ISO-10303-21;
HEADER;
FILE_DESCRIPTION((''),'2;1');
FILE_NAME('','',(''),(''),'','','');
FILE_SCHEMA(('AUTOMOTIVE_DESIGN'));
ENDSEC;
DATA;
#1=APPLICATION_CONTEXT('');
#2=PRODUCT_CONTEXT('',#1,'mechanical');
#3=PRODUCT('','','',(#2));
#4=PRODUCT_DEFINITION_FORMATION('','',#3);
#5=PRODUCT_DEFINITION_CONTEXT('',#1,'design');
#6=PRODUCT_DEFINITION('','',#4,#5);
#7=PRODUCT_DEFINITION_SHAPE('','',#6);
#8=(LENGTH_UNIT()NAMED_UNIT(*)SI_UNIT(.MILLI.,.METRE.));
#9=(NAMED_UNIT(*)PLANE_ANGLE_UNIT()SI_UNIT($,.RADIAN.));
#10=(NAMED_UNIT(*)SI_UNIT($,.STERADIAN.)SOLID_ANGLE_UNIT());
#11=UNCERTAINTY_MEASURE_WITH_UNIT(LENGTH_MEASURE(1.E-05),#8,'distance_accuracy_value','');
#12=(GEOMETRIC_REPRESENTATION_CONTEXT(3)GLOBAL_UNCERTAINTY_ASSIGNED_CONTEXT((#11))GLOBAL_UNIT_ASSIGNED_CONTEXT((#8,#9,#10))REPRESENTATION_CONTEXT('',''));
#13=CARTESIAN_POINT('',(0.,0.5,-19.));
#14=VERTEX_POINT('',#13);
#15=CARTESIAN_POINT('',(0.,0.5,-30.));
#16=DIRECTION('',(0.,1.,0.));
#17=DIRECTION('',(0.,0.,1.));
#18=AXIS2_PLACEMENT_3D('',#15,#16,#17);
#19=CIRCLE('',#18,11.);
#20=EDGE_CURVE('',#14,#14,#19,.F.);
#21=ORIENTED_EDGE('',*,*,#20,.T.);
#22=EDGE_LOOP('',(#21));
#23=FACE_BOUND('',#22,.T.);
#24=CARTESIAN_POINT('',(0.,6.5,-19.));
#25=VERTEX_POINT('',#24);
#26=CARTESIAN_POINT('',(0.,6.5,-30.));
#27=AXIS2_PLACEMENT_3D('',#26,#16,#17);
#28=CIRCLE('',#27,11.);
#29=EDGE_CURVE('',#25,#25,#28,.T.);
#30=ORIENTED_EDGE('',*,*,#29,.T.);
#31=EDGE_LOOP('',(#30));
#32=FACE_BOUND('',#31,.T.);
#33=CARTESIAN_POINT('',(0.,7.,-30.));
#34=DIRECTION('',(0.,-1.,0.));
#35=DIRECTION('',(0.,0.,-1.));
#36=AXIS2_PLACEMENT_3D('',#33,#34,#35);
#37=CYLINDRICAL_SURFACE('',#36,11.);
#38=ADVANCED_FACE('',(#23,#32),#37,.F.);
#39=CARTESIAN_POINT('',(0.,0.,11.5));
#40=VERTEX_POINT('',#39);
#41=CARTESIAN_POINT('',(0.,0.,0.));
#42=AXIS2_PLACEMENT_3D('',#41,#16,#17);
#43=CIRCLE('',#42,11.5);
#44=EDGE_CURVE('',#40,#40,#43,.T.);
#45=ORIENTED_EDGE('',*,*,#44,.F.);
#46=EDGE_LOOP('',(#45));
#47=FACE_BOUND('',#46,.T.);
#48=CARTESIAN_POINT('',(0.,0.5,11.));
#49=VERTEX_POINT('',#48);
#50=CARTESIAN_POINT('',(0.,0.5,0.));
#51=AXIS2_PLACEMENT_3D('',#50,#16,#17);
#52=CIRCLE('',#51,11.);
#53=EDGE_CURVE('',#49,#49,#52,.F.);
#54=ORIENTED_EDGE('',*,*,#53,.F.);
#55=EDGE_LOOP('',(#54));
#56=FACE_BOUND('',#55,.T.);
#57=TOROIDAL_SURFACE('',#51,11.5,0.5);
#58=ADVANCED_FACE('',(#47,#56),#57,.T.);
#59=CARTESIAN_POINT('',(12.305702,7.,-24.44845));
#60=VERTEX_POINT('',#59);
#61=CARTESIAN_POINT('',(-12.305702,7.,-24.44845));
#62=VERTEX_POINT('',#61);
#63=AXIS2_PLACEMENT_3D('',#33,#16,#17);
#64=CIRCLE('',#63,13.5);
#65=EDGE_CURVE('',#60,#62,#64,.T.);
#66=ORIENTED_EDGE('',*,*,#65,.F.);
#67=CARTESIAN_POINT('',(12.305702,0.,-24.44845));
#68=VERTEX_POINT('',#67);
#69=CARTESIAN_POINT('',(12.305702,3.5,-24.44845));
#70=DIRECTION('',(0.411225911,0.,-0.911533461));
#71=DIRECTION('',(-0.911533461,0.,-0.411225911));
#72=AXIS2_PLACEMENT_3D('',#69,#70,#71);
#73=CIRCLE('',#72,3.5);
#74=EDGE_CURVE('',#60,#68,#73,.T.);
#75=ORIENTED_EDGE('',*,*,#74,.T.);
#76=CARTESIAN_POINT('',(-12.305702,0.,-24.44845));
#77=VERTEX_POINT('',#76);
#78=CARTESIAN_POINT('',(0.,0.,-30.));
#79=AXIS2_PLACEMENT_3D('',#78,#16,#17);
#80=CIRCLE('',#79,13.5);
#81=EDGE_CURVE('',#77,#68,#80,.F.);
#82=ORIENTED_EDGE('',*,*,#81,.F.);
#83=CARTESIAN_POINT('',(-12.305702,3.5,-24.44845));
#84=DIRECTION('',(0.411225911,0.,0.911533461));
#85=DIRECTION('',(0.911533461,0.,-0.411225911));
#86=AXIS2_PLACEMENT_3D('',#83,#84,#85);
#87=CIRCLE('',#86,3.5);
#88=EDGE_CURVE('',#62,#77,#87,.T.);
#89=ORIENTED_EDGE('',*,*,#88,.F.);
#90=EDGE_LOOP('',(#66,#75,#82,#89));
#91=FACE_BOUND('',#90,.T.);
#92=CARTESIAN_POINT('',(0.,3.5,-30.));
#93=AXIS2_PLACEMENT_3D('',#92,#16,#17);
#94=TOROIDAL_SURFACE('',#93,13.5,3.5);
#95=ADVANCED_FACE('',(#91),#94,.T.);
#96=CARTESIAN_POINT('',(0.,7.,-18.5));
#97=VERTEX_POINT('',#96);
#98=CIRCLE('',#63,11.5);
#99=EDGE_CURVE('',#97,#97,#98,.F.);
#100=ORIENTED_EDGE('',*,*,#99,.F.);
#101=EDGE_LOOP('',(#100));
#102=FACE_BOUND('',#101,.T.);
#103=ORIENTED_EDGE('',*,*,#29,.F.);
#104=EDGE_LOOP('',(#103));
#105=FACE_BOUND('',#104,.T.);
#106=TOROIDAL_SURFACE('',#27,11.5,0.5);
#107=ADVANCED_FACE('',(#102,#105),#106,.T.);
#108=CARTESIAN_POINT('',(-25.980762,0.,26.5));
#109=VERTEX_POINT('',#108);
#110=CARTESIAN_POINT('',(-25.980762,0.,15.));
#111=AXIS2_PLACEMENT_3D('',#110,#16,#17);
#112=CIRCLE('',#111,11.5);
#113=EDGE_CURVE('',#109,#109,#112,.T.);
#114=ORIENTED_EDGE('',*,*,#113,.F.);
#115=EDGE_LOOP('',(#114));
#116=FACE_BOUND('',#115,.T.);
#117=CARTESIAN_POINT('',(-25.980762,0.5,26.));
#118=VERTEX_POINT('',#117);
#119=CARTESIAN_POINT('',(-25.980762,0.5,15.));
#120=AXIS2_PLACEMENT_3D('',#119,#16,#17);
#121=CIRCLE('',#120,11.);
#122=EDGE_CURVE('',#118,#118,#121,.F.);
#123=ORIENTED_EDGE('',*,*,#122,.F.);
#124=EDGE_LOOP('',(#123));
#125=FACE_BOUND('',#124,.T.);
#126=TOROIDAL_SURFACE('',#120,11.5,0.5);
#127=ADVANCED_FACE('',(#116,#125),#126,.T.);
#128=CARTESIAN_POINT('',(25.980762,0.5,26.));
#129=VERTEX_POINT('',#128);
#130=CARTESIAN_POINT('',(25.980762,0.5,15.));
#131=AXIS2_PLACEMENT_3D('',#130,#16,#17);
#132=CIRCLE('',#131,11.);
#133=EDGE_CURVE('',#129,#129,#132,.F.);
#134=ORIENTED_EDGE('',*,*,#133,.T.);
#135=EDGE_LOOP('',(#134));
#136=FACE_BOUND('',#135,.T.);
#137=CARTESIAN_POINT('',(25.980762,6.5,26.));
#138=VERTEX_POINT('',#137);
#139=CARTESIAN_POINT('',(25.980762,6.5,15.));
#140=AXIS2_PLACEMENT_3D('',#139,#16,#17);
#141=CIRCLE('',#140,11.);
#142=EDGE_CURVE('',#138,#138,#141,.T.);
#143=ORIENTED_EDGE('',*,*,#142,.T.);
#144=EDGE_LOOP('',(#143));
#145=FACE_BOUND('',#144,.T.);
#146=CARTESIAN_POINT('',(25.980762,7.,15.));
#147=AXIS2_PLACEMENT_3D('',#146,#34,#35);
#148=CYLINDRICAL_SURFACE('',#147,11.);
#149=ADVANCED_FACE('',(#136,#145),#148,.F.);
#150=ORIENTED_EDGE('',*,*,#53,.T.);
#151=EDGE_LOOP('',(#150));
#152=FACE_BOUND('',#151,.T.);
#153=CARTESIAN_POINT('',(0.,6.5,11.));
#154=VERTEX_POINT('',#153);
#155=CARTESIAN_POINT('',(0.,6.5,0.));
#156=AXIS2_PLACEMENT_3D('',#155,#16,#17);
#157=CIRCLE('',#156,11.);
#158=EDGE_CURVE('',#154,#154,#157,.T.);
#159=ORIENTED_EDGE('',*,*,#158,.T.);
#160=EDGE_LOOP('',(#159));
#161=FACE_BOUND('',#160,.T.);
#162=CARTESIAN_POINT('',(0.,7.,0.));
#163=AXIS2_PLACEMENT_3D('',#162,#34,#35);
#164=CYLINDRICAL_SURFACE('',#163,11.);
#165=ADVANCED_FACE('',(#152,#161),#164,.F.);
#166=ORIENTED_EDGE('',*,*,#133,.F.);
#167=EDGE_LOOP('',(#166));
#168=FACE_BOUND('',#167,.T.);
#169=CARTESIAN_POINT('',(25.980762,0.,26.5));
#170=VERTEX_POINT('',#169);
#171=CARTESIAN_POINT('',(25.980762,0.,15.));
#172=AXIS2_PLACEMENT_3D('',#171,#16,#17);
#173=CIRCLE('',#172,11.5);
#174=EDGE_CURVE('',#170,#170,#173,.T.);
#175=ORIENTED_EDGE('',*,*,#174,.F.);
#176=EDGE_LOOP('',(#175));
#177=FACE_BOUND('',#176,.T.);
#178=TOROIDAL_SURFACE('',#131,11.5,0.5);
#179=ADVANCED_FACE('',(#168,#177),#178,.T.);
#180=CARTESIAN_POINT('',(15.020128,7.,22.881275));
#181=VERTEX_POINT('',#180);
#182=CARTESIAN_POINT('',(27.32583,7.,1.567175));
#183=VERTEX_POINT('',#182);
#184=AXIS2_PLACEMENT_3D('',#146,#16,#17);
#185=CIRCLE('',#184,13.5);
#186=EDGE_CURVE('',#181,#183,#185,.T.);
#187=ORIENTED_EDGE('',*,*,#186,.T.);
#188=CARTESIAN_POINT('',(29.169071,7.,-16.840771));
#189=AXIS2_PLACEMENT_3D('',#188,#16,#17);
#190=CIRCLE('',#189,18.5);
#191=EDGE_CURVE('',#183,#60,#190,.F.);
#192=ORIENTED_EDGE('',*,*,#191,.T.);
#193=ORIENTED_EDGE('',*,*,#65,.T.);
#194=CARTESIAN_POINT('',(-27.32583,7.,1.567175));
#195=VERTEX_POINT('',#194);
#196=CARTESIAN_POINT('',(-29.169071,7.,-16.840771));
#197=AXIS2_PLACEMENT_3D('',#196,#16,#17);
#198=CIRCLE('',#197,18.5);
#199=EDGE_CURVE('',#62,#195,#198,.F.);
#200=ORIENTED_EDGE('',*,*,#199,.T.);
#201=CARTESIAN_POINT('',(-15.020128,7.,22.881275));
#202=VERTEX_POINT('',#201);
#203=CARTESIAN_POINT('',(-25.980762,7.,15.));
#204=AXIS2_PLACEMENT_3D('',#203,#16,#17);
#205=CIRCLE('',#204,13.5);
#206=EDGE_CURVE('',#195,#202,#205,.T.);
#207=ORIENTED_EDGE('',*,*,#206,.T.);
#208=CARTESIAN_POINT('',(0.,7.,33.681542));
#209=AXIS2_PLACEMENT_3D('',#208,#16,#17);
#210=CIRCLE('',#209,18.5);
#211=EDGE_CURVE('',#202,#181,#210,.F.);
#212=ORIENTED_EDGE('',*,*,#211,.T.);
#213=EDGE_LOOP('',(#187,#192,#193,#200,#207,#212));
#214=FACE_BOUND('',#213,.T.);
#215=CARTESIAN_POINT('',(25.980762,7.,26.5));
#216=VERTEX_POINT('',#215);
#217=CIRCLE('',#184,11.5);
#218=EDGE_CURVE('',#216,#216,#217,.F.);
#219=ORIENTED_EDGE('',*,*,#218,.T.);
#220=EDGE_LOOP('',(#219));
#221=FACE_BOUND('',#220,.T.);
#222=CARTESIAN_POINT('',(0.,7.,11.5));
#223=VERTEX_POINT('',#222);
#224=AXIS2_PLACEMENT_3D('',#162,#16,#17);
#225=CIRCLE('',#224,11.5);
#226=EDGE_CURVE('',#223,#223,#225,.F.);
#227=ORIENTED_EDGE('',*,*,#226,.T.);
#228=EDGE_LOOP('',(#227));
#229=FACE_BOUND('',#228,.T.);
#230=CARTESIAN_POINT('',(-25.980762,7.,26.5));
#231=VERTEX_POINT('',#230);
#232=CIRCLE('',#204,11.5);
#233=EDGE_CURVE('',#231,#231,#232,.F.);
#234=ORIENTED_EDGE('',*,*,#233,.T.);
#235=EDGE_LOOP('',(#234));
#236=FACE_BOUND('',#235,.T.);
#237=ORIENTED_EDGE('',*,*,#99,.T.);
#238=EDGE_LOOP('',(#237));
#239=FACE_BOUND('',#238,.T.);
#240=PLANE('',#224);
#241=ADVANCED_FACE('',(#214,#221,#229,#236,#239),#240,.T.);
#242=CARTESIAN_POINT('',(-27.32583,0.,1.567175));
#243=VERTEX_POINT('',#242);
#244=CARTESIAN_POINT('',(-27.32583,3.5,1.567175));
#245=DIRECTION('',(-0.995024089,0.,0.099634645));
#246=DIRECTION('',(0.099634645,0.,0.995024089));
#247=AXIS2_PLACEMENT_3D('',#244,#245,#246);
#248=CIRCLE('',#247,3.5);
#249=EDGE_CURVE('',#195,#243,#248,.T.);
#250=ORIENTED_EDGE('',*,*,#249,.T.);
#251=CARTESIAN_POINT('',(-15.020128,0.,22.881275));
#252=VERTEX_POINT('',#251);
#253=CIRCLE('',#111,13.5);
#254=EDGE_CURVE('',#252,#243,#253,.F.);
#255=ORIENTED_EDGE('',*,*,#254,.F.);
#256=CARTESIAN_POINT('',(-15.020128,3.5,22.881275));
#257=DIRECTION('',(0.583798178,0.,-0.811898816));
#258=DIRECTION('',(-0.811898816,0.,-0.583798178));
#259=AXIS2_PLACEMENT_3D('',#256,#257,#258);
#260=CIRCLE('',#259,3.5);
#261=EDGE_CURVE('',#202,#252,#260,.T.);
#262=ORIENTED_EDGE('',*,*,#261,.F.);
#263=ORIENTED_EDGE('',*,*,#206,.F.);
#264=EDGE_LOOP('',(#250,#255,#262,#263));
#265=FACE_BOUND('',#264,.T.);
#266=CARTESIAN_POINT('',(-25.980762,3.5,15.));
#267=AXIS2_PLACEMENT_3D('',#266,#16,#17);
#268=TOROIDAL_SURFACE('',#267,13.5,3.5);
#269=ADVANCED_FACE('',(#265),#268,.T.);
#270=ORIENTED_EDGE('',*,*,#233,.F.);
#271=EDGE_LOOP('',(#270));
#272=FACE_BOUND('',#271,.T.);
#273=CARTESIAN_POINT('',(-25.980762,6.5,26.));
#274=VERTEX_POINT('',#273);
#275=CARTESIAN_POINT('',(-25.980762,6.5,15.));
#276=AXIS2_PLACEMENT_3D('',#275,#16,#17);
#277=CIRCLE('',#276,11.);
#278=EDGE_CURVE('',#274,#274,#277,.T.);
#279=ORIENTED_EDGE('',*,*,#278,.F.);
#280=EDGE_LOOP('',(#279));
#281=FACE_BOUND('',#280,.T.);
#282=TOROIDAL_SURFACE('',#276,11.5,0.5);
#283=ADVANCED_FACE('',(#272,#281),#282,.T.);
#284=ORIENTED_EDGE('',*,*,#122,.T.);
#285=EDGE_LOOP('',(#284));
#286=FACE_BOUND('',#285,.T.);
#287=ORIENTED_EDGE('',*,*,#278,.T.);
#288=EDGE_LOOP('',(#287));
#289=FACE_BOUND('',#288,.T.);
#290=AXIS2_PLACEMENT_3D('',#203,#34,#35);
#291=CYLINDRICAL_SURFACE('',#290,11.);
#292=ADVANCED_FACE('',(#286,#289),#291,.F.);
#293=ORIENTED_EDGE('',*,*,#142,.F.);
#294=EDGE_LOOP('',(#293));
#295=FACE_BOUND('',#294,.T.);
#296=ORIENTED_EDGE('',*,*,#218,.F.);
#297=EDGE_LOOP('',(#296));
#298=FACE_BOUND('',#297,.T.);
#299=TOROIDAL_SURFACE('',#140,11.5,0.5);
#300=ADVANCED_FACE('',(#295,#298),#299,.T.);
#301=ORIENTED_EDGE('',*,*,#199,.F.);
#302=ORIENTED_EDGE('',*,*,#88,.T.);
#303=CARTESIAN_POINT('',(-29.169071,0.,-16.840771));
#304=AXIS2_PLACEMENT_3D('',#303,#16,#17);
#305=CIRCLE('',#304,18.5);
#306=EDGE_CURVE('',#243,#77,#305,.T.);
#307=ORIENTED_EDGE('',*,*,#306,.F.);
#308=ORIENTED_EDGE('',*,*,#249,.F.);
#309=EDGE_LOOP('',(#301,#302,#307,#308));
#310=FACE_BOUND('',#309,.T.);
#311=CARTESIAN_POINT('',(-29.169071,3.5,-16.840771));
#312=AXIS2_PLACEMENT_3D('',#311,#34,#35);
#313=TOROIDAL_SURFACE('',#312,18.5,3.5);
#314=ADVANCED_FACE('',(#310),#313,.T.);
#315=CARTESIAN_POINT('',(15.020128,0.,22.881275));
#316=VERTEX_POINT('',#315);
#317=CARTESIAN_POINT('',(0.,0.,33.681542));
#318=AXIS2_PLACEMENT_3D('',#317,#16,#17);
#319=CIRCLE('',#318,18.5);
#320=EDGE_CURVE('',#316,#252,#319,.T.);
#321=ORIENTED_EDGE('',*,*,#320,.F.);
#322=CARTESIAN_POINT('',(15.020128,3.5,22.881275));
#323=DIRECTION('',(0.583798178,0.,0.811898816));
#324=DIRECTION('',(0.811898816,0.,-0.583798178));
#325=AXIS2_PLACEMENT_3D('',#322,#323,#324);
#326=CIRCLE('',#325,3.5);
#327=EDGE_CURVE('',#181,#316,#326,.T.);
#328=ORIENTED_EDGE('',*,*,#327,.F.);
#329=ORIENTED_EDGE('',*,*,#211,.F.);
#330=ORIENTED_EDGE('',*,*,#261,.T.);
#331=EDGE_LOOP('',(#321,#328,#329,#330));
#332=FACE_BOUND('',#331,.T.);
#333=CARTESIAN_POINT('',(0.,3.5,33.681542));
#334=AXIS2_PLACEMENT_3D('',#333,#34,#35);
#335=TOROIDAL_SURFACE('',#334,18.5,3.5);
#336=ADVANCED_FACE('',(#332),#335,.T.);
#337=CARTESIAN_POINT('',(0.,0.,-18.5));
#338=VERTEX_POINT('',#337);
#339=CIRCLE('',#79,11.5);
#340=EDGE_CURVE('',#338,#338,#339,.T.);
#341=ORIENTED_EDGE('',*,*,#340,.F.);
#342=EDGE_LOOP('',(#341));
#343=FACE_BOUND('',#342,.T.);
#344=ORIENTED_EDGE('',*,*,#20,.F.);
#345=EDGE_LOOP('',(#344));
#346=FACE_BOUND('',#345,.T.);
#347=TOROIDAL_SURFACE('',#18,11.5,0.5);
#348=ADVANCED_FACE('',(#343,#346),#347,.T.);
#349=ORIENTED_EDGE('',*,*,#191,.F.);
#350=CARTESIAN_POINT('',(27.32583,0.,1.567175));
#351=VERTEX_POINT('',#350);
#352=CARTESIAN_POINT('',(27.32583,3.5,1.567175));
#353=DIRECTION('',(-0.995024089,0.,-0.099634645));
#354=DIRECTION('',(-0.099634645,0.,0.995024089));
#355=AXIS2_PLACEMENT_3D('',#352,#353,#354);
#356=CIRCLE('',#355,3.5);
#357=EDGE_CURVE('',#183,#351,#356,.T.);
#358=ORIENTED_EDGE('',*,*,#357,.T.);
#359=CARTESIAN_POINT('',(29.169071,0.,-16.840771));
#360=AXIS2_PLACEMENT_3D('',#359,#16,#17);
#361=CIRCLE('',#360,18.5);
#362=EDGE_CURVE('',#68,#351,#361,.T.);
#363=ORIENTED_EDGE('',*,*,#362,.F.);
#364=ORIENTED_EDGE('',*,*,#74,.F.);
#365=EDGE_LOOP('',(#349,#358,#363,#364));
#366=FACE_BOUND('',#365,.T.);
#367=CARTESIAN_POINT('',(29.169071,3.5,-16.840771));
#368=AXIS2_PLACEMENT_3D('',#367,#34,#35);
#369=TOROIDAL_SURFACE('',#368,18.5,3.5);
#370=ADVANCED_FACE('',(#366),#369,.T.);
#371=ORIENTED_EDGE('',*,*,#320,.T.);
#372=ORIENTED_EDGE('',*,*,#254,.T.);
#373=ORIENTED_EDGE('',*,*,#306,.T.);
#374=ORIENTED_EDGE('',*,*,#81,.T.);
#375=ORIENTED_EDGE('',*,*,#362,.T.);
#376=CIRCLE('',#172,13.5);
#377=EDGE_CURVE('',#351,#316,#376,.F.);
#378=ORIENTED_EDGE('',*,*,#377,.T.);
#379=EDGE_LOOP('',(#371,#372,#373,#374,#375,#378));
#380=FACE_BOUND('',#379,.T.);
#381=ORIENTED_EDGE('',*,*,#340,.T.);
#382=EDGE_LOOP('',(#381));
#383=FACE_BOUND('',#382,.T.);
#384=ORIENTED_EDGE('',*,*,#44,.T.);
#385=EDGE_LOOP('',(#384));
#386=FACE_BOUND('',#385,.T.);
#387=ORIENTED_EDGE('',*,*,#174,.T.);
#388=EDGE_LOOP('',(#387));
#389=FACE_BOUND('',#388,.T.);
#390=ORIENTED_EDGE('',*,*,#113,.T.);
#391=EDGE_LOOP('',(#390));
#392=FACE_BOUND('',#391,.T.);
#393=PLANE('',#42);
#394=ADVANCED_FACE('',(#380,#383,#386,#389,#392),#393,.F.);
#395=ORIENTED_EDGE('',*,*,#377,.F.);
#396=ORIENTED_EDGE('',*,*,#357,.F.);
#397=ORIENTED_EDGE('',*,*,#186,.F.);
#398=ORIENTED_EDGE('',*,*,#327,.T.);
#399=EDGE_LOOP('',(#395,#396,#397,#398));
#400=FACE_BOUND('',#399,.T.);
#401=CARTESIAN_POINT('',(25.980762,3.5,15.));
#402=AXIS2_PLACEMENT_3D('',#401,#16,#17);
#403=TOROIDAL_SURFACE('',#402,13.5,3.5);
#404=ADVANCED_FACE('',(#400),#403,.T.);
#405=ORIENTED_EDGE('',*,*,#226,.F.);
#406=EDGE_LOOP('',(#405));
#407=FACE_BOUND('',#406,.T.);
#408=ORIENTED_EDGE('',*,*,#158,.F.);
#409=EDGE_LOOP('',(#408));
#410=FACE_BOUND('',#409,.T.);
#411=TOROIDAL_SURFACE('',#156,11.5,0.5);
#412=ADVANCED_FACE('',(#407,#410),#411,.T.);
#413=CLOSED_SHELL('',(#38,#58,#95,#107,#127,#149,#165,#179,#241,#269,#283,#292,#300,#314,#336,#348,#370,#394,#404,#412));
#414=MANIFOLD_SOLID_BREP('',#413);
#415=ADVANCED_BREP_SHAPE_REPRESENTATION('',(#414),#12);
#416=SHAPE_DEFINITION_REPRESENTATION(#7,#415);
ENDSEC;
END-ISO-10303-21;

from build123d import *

# Parameters (mm, degrees)
SKETCH1_R           = 11
BOSS_EXTRUDE1_DEPTH = 7
FILLET1_R           = 3.5
FILLET2_R           = 0.5


with BuildPart() as part:
    # Sketch1 → Boss-Extrude1 (new body)
    with BuildSketch(Plane(origin=(0, 0, 0), x_dir=(1, 0, 0), z_dir=(0, 1, 0))):
        with BuildLine():
            ThreePointArc((15.496068833, 23.009159512), (0, 47), (-15.496068833, 23.009159512))
            ThreePointArc((-15.496068833, 23.009159512), (-16.178689687, 9.340770846), (-27.674551074, 1.915409512))
            ThreePointArc((-27.674551074, 1.915409512), (-40.703193978, -23.5), (-12.178482241, -24.924569024))
            ThreePointArc((-12.178482241, -24.924569024), (0, -18.681541692), (12.178482241, -24.924569024))
            ThreePointArc((12.178482241, -24.924569024), (40.703193978, -23.5), (27.674551074, 1.915409512))
            ThreePointArc((27.674551074, 1.915409512), (16.178689687, 9.340770846), (15.496068833, 23.009159512))
        make_face()
        with Locations(Location((0, 30, 0), (0, 0, 270))):
            Circle(SKETCH1_R, mode=Mode.SUBTRACT)
        with Locations(Location((0, 0, 0), (0, 0, 270))):
            Circle(SKETCH1_R, mode=Mode.SUBTRACT)
        with Locations(Location((-25.980762114, -15, 0), (0, 0, 270))):
            Circle(SKETCH1_R, mode=Mode.SUBTRACT)
        with Locations(Location((25.980762114, -15, 0), (0, 0, 270))):
            Circle(SKETCH1_R, mode=Mode.SUBTRACT)
    extrude(amount=BOSS_EXTRUDE1_DEPTH)

    # Fillet1
    fillet1_edges = [part.edges().sort_by_distance(p)[0] for p in [
        (-16.178689687, 7, -9.340770846),
        (16.178689687, 0, -9.340770846),
        (40.703193978, 0, 23.5),
        (0, 0, 18.681541692),
        (-40.703193978, 0, 23.5),
        (0, 0, -47),
    ]]
    fillet(fillet1_edges, radius=FILLET1_R - 0.0001)  # a hair under: the kernel refuses the full size

    # Fillet2
    fillet2_edges = [part.edges().sort_by_distance(p)[0] for p in [
        (-25.980762114, 0, 4),
        (25.980762114, 0, 4),
        (0, 0, -11),
        (0, 0, -41),
        (0, 7, -41),
        (0, 7, -11),
        (25.980762114, 7, 4),
        (-25.980762114, 7, 4),
    ]]
    fillet(fillet2_edges, radius=FILLET2_R)


solid = part.part
